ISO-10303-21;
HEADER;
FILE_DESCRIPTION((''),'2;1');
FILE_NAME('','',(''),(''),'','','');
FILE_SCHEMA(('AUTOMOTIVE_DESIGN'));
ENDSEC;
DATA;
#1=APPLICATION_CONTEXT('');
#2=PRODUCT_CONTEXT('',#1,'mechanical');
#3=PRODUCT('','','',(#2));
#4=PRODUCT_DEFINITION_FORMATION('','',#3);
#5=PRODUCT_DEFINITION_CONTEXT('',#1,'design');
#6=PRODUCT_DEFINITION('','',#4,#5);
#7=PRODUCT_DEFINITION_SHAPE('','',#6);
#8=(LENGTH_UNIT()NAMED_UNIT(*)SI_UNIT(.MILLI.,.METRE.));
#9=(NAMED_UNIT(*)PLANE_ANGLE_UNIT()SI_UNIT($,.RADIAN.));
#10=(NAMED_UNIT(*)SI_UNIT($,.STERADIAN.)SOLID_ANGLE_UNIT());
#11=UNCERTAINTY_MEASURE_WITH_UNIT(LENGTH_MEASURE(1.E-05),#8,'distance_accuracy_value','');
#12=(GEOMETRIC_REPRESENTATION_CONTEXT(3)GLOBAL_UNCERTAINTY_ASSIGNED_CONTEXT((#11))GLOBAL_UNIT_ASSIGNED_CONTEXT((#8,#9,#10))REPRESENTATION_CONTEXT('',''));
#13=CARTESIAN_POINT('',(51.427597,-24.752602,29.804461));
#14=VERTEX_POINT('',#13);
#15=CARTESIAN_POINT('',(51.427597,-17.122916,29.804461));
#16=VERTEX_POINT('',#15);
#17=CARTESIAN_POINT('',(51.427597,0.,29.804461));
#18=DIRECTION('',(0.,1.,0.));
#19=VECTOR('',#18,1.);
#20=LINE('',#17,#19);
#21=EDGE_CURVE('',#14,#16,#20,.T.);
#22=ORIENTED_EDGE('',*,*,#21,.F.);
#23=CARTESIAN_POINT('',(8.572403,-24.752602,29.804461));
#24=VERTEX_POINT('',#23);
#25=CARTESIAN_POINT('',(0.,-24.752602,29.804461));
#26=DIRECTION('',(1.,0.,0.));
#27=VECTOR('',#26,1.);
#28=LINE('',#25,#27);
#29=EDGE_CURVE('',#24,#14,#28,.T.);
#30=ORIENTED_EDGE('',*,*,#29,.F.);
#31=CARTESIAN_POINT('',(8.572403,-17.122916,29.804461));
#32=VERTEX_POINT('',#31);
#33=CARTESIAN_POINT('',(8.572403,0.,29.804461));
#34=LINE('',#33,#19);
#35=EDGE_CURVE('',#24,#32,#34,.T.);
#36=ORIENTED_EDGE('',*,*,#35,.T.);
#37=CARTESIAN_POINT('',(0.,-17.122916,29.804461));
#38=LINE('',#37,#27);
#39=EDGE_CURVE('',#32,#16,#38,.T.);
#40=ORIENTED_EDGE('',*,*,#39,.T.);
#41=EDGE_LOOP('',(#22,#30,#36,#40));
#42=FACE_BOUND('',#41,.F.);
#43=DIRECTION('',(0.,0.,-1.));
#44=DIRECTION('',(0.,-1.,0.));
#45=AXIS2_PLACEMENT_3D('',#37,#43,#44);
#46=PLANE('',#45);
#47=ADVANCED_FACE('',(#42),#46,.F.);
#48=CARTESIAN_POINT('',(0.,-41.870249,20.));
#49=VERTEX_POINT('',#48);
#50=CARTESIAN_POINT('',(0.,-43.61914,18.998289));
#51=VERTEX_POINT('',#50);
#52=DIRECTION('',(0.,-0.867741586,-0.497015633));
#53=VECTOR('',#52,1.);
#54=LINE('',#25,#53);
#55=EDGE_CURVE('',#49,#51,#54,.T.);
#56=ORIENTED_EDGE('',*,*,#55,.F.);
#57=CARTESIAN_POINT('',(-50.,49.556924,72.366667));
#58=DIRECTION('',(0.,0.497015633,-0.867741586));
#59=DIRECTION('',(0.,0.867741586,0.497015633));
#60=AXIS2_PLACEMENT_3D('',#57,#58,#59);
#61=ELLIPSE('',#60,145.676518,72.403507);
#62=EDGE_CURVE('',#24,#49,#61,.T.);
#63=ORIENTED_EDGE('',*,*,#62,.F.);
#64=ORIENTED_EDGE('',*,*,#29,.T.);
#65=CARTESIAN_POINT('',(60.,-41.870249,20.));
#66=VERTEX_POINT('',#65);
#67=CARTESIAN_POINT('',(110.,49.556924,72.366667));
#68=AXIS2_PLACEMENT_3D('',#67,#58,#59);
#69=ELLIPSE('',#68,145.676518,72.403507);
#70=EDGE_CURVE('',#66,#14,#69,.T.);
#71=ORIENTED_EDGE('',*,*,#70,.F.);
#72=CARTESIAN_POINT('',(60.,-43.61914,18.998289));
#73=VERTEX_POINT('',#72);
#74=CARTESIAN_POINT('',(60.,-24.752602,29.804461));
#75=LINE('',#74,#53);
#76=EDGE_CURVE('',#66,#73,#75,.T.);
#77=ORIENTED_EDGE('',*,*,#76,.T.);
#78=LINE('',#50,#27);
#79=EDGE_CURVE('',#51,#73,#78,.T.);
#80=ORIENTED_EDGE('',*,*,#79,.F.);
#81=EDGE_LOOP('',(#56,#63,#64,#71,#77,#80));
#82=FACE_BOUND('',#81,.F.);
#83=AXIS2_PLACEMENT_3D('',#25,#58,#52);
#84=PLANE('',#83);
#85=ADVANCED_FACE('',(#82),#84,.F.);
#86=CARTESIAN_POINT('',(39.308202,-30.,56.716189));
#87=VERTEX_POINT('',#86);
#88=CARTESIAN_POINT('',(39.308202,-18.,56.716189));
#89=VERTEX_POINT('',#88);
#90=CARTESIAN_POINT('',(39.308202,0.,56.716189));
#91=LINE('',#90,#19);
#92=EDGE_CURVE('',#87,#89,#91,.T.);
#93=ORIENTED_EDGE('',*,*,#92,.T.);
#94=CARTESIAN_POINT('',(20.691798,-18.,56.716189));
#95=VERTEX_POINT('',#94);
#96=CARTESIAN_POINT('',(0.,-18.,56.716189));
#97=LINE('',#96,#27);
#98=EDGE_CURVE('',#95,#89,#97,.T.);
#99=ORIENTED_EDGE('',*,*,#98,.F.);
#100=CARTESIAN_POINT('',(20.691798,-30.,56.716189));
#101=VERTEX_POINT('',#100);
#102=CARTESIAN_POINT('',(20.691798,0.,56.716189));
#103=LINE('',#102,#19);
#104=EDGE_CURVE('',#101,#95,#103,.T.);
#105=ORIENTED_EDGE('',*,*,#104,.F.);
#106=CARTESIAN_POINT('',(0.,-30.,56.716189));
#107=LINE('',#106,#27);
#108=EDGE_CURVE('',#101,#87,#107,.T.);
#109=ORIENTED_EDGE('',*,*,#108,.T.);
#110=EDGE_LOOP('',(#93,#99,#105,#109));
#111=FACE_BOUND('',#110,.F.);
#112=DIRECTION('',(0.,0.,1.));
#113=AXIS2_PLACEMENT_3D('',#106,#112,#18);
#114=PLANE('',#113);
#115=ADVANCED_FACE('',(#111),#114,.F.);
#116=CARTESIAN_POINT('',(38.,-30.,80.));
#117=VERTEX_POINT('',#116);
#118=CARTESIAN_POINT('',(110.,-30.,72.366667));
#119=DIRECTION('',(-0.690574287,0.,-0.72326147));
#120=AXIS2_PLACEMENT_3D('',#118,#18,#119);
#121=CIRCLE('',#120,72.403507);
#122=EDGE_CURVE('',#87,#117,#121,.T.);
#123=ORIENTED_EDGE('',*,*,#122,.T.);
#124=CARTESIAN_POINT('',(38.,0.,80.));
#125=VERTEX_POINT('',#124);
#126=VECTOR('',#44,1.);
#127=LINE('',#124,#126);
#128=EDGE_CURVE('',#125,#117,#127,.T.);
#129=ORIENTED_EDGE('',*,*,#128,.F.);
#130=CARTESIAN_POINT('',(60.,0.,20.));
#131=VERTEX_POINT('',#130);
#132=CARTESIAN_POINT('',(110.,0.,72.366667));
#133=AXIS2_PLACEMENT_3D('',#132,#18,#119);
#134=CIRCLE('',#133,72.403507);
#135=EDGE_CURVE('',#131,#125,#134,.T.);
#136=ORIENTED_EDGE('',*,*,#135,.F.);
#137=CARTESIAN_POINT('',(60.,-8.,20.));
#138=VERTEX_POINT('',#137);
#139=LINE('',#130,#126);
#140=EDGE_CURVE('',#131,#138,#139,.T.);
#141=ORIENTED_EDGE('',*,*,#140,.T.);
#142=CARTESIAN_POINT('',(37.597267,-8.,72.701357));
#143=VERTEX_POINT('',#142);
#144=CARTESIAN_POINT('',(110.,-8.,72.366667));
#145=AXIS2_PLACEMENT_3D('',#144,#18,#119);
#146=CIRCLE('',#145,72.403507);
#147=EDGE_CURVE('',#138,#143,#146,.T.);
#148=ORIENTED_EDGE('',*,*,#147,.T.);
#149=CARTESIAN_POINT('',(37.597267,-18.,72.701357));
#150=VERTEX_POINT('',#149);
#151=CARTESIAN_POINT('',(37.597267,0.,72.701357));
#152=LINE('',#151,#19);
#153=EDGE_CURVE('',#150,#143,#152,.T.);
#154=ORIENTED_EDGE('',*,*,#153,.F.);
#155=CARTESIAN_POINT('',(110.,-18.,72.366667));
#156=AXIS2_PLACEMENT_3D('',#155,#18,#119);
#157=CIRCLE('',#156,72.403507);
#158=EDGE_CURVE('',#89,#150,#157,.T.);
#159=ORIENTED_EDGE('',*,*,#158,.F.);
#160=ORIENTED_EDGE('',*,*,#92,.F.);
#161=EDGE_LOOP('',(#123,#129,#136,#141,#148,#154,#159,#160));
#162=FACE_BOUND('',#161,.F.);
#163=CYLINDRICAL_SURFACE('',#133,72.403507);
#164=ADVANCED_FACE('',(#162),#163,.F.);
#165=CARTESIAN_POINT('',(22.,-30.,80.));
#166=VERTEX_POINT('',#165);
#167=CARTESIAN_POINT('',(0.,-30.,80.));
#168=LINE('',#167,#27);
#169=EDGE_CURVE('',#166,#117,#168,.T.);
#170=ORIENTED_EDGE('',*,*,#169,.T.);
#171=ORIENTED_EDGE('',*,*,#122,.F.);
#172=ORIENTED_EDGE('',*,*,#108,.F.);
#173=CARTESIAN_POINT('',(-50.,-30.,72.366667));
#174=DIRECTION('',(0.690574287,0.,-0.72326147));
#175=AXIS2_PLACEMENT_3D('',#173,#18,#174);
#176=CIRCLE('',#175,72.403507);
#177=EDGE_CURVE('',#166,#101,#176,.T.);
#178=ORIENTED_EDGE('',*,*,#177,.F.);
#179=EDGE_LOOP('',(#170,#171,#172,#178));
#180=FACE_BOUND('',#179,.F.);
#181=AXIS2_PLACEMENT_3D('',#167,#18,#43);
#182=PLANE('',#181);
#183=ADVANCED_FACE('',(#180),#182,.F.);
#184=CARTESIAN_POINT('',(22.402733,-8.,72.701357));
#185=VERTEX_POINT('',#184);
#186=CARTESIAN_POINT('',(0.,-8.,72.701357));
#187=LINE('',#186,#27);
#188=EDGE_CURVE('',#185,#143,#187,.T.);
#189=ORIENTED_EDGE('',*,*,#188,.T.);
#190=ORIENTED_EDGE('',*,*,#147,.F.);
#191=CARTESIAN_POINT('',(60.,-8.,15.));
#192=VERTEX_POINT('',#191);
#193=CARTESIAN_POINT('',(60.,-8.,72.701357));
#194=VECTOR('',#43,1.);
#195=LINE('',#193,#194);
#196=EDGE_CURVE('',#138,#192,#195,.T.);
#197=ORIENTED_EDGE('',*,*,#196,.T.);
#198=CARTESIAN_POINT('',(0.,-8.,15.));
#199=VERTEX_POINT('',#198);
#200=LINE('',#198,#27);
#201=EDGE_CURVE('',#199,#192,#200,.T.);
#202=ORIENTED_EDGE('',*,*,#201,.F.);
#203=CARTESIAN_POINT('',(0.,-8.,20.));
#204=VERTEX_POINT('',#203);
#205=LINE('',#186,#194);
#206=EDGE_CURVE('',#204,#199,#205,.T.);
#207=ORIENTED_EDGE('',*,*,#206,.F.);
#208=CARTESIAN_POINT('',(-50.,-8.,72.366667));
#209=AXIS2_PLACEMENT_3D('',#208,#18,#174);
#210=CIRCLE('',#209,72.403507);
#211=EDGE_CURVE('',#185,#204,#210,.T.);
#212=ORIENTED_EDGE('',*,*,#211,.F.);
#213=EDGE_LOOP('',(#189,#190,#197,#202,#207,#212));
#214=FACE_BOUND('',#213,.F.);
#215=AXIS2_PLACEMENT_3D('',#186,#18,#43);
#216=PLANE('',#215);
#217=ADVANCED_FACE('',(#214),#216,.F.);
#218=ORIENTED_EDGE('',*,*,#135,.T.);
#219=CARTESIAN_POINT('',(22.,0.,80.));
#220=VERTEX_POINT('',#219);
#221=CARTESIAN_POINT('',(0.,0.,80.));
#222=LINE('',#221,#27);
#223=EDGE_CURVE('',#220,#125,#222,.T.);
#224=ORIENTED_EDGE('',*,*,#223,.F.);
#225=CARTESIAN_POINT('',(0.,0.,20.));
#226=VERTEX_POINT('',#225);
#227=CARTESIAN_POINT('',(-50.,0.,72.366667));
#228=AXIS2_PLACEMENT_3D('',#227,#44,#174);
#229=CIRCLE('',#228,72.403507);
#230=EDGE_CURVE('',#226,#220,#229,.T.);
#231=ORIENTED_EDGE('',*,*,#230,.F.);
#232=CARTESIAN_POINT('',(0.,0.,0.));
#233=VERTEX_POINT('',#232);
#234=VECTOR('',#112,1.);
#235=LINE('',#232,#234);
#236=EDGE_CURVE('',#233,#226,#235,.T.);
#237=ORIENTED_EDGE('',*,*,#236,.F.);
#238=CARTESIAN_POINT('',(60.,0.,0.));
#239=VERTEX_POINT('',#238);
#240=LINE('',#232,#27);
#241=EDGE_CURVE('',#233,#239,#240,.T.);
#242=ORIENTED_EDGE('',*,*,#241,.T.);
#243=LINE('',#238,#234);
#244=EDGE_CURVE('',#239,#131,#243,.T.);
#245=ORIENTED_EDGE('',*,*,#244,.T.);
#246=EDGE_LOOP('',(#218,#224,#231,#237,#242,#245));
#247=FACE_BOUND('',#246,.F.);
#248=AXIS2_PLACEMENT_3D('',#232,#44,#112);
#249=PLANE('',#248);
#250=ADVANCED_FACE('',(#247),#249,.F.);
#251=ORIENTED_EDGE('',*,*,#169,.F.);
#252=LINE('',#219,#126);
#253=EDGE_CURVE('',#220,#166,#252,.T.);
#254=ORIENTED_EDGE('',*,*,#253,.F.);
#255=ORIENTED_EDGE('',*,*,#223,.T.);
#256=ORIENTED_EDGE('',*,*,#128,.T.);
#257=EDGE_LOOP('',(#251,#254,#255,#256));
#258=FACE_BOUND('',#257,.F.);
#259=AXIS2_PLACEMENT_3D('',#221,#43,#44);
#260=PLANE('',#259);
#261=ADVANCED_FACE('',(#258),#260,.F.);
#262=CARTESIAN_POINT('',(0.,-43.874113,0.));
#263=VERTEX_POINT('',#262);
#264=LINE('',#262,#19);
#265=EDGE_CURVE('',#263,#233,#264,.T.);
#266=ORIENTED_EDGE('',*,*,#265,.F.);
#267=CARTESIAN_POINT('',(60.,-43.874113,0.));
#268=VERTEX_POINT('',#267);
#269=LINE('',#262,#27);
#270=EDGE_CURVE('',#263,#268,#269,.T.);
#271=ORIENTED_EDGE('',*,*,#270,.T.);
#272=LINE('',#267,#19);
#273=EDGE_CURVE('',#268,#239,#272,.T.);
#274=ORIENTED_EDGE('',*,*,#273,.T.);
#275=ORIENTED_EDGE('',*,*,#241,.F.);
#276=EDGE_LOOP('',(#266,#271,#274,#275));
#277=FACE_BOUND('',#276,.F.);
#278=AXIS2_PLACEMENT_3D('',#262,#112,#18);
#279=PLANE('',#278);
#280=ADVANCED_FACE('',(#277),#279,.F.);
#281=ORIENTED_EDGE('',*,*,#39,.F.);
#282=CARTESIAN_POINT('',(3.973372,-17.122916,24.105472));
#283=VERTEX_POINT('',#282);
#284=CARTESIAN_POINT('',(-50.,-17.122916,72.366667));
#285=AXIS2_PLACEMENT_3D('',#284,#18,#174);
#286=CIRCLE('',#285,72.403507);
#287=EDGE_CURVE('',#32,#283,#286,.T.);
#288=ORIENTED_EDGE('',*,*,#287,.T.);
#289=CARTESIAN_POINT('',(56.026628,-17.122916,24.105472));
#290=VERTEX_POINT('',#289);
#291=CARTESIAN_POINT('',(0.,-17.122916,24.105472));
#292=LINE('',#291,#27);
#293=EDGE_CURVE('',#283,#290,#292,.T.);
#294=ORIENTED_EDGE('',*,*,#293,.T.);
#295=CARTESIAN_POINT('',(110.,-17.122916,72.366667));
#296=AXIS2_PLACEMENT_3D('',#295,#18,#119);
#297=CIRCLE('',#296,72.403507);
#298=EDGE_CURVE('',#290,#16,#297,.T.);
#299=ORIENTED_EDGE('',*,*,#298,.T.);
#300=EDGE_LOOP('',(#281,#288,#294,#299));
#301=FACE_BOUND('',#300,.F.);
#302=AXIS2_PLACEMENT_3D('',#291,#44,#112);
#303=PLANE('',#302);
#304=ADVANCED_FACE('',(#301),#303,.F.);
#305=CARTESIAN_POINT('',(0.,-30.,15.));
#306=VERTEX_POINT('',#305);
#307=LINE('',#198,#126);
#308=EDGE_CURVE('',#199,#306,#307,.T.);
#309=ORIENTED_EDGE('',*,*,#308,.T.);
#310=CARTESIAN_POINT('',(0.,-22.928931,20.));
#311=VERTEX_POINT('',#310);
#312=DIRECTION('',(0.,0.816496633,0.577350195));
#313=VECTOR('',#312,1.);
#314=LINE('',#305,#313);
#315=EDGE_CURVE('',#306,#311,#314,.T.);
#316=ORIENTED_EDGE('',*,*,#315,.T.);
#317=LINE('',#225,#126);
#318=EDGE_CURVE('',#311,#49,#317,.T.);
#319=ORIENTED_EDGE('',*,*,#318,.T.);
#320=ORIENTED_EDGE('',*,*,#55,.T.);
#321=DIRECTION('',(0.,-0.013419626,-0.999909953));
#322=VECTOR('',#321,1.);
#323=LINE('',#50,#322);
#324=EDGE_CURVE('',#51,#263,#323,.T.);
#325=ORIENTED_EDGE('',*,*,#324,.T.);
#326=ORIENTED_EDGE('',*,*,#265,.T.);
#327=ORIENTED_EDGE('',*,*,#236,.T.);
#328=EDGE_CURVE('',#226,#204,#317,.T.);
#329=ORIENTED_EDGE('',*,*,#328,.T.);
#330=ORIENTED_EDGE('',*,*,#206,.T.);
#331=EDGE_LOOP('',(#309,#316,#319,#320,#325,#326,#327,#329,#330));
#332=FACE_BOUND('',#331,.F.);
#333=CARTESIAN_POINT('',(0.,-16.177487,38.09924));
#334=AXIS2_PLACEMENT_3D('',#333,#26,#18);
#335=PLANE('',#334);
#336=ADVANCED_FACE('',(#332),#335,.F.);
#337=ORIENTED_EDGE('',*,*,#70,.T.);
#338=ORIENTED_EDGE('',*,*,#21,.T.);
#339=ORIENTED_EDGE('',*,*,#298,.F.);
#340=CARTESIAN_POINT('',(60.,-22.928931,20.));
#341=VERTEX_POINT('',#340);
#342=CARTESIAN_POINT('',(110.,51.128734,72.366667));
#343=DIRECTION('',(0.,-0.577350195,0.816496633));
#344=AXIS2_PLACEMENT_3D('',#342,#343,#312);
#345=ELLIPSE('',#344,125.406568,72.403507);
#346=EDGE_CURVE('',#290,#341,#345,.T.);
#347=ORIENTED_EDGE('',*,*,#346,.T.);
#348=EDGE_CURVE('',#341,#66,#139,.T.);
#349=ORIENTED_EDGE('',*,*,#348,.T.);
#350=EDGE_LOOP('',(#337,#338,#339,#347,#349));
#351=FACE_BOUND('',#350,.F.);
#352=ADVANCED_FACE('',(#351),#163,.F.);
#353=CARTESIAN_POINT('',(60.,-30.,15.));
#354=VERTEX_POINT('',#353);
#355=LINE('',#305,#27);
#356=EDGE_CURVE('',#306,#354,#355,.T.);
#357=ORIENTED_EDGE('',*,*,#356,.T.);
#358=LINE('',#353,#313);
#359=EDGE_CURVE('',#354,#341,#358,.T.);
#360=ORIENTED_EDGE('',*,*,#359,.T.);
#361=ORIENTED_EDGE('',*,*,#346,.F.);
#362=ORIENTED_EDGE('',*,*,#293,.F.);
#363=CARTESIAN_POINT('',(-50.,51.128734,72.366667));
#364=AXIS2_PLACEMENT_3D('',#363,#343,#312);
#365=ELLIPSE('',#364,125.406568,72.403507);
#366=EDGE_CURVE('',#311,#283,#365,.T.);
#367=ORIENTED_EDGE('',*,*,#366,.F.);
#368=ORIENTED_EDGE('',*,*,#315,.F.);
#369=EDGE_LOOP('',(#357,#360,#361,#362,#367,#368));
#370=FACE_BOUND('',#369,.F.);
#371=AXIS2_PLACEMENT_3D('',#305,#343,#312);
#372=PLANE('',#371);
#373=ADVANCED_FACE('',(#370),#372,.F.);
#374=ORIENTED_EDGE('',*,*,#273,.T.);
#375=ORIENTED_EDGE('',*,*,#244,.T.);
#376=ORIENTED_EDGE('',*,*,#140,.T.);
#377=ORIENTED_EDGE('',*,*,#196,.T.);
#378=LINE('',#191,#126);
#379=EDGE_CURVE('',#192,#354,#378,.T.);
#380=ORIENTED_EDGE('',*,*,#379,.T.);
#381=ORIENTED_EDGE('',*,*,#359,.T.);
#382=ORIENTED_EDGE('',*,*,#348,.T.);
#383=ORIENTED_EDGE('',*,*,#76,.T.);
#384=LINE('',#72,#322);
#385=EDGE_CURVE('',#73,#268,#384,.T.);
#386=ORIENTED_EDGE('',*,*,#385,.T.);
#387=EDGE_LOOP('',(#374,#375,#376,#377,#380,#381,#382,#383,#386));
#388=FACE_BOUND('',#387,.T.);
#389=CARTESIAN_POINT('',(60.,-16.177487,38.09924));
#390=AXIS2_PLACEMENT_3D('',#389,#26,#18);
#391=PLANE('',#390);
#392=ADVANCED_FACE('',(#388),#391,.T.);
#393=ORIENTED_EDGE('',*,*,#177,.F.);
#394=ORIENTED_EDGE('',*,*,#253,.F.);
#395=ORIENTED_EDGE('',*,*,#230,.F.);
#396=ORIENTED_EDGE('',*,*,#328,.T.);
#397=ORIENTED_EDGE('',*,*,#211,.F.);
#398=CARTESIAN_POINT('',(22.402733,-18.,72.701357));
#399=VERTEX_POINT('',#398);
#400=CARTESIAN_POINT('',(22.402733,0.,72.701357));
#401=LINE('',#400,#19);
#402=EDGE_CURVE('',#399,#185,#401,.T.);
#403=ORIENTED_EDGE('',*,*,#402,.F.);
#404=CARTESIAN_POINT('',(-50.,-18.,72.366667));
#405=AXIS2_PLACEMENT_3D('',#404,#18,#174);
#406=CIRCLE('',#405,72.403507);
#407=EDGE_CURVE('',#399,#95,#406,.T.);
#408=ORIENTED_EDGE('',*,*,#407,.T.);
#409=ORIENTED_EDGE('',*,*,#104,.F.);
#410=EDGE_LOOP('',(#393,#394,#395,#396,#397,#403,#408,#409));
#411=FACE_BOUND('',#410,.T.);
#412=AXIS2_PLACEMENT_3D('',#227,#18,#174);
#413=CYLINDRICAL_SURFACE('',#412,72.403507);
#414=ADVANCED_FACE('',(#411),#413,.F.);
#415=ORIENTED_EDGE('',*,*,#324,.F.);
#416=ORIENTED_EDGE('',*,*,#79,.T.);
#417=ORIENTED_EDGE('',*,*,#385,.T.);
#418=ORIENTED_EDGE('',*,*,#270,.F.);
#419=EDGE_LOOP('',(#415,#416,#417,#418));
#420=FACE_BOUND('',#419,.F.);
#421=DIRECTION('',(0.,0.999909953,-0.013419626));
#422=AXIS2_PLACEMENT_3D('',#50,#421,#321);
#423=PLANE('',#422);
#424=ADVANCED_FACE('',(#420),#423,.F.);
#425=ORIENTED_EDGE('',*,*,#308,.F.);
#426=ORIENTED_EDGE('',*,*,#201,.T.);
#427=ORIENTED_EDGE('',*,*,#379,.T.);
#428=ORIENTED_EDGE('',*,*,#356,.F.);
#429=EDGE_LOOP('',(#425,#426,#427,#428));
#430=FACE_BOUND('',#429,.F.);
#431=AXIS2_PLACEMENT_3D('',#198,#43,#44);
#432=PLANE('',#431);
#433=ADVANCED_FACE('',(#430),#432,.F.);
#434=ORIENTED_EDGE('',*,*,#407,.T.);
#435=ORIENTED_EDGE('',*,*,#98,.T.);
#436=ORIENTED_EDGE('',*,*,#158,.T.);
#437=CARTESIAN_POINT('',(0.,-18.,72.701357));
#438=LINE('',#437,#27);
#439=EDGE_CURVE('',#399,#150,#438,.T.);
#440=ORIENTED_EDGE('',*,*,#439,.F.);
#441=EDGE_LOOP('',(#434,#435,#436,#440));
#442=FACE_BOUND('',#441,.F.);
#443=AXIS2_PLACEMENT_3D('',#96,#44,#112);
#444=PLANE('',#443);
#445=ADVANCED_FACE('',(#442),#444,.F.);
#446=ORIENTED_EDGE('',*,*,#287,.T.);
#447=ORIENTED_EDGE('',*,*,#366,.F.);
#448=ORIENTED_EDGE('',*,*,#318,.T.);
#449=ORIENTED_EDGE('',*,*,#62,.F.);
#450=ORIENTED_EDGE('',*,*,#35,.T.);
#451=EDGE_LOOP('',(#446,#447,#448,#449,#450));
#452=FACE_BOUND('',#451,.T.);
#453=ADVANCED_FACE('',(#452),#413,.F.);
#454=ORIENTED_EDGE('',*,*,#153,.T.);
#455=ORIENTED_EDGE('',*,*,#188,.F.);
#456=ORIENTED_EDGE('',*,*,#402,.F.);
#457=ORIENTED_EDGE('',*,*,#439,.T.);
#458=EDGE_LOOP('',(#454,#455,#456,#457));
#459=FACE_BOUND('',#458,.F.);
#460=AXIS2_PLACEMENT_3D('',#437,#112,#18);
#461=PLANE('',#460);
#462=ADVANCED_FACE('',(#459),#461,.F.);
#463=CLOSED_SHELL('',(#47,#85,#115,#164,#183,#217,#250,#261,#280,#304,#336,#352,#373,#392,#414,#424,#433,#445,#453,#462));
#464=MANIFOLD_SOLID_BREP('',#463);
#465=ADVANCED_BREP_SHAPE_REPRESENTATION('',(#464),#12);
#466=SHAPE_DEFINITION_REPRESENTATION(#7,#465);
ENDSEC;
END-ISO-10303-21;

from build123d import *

# Parameters (mm, degrees)
F1_DEPTH = 60
F3_DEPTH = 43.8751131995


# Not quite as in the source:
# - a pattern or mirror of a feature is missing from the dataset's text; its kind, count and spacing are read off the source's solid


with BuildPart() as f1:
    # F0 (on Right) → F1 (new body)
    with BuildSketch(Plane.YZ):
        Polygon((-43.8741131995, 0), (0, 0), (0, 80), (-30, 80), (-30, 56.7161887884), (-18, 56.7161887884), (-18, 72.701357305), (-8, 72.701357305), (-8, 15), (-30, 15), (-17.1229156852, 24.1054718941), (-17.1229156852, 29.8044607043), (-24.7526019812, 29.8044607043), (-43.619140311, 18.9982891026), align=None)
    extrude(amount=F1_DEPTH)

    # F2 (on face) → F3 (cut, through all)
    with BuildSketch(Plane(origin=(0, 0, 0), x_dir=(-1, 0, 0), z_dir=(0, 1, 0))):
        with BuildLine():
            Line((-60, 80), (-60, 20))
            ThreePointArc((-60, 20), (-42.0220624026, 47.4414228809), (-38, 80))
            Line((-38, 80), (-60, 80))
        make_face()
    f3 = extrude(amount=-F3_DEPTH, mode=Mode.SUBTRACT)

    # F3_copies: F3 across plane
    add(f3.mirror(Plane(origin=(30, 0, 0), x_dir=(0, 0, -1), z_dir=(-1, 0, 0))), mode=Mode.SUBTRACT)


solid = f1.part
